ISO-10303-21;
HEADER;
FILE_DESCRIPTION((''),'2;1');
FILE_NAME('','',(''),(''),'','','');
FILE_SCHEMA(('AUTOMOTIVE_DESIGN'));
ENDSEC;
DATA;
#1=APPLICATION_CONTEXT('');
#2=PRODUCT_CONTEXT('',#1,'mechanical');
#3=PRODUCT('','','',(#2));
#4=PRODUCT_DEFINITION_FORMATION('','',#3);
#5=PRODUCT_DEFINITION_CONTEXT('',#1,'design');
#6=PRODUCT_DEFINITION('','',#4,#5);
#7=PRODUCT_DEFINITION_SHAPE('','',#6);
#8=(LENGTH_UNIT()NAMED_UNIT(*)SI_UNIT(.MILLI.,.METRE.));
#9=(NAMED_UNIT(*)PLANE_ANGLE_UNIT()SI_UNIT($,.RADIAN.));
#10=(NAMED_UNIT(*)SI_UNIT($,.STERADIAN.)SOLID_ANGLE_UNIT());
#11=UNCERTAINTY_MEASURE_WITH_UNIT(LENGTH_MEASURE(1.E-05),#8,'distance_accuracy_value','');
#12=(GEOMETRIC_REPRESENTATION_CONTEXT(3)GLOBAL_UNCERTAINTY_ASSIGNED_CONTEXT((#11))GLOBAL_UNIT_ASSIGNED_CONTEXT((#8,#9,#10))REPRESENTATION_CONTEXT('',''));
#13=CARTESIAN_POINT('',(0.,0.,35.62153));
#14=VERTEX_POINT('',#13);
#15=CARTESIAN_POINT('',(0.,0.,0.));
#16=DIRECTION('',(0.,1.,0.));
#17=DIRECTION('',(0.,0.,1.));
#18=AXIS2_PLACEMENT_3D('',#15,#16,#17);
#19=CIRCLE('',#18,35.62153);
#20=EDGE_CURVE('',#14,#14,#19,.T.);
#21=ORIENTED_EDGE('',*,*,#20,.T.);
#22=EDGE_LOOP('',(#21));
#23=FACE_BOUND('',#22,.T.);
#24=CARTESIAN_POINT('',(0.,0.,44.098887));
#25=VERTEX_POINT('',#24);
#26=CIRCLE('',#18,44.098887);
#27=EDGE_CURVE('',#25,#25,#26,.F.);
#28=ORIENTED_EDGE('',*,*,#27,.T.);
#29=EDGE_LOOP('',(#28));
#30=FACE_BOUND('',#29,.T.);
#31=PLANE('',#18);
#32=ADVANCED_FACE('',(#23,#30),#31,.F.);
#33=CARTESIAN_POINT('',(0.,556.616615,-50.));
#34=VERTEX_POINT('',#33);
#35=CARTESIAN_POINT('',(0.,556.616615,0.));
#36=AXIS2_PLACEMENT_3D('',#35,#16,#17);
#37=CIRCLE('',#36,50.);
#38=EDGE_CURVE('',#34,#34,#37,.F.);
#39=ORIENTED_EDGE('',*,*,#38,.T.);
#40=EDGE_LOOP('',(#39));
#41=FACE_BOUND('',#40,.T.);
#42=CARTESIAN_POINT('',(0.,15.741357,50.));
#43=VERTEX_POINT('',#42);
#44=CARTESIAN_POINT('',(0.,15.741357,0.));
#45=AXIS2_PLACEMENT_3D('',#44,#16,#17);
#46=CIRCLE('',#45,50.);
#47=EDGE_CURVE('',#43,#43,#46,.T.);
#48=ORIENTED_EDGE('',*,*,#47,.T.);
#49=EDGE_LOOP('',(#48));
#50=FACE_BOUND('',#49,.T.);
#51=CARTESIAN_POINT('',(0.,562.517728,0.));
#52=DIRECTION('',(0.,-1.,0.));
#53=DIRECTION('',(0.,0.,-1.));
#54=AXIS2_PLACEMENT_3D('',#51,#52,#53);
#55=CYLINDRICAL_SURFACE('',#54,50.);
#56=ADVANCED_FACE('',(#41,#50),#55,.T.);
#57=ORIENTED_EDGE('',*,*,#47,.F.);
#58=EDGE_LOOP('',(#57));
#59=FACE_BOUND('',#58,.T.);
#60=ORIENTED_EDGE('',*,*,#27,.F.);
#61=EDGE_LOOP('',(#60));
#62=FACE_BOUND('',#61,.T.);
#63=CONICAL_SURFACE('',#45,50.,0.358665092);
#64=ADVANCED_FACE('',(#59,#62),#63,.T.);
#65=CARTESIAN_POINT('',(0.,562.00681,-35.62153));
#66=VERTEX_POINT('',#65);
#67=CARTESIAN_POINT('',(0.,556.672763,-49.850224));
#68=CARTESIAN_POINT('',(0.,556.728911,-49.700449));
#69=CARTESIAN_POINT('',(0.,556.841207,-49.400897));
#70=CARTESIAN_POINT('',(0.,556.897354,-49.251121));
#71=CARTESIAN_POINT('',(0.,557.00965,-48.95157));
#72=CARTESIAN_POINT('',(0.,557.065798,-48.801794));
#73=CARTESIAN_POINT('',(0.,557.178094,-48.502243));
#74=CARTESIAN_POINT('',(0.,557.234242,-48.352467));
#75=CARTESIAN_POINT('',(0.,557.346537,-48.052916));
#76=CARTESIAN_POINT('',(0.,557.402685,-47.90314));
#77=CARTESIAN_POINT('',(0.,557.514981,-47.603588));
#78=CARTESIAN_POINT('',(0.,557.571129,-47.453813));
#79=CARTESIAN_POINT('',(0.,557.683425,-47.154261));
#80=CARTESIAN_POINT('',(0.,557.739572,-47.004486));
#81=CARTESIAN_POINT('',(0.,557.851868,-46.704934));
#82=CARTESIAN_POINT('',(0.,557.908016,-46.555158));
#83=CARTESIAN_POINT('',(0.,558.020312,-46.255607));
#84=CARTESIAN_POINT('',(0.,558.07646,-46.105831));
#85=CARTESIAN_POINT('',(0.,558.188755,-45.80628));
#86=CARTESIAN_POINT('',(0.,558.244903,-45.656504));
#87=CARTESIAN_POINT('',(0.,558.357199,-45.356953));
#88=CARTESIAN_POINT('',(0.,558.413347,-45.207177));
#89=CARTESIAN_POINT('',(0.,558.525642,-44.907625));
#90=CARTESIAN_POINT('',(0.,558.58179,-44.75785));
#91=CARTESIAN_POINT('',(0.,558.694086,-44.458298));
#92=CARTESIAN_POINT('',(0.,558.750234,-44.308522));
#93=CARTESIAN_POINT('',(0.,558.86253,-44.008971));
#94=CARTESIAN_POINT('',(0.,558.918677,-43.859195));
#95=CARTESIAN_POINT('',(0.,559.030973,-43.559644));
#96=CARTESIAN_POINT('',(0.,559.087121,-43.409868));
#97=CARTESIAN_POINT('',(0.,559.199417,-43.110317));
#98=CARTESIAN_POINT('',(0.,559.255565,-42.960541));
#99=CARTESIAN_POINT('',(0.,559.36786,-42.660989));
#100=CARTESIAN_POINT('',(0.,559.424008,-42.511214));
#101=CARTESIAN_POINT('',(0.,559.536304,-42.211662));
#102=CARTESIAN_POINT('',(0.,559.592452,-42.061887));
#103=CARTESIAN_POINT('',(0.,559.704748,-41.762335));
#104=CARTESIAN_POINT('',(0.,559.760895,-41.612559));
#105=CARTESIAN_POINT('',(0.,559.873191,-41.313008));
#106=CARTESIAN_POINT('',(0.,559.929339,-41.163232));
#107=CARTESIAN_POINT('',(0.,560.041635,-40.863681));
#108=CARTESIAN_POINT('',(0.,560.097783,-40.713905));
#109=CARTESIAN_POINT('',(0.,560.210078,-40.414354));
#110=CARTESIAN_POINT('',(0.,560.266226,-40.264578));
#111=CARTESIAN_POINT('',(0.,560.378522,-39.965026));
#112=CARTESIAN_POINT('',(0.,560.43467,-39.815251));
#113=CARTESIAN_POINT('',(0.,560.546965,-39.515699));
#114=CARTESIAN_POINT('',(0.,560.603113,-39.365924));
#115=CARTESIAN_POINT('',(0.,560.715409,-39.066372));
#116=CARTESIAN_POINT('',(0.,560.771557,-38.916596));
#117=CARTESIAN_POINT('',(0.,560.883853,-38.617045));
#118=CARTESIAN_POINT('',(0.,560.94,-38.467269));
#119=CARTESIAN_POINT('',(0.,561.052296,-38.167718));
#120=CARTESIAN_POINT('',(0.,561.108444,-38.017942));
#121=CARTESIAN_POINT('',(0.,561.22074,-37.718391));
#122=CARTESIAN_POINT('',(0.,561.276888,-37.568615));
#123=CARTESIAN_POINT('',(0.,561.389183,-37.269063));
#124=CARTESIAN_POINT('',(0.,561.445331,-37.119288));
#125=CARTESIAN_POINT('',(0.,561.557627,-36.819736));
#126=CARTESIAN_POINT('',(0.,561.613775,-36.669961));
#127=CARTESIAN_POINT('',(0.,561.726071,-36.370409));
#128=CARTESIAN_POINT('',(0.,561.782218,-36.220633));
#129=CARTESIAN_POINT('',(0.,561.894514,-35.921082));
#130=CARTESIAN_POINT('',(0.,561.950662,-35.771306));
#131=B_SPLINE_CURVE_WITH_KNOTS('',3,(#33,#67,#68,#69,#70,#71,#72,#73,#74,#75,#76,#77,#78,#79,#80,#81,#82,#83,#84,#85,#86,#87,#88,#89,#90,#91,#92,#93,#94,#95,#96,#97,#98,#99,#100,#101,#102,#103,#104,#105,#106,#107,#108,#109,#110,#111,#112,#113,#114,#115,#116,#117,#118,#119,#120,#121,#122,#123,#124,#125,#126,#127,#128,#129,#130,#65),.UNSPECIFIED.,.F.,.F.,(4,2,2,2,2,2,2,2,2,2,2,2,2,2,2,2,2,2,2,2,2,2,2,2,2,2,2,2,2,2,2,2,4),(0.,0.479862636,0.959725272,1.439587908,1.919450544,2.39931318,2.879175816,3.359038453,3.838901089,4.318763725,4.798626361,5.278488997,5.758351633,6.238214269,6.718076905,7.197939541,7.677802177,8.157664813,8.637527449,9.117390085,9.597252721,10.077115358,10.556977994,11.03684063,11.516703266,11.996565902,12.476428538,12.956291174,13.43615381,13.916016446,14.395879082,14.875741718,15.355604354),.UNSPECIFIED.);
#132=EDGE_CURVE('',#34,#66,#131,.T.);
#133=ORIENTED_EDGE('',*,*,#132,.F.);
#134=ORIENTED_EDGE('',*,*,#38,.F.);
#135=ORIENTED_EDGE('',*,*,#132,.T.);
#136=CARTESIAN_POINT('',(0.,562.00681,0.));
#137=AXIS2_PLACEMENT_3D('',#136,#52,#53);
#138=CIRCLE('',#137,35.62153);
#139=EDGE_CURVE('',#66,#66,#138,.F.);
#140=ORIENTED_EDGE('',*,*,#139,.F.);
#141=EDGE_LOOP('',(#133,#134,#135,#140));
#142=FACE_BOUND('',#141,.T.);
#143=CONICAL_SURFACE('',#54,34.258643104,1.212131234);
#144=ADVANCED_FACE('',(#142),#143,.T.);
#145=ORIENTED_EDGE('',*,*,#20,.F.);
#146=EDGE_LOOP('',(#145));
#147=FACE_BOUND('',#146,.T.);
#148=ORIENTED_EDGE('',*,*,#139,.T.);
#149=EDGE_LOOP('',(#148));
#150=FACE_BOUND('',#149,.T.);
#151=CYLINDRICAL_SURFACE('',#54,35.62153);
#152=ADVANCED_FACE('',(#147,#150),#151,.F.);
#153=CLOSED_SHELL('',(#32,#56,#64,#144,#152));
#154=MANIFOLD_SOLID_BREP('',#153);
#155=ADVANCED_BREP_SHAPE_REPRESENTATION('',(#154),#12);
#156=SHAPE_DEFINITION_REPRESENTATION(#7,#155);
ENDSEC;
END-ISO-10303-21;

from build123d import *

# Parameters (mm, degrees)
SKETCH1_R           = 50
BOSS_EXTRUDE1_DEPTH = 562.517728
SKETCH2_R           = 35.621530439
CUT_EXTRUDE1_DEPTH  = 567.944613092
CHAMFER1_SIZE       = 5.901113
CHAMFER1_SIZE_2     = 15.741357


with BuildPart() as part:
    # Sketch1 → Boss-Extrude1 (new body)
    with BuildSketch(Plane(origin=(0, 0, 0), x_dir=(1, 0, 0), z_dir=(0, 1, 0))):
        with Locations(Location((0, 0, 0), (0, 0, 270))):
            Circle(SKETCH1_R)
    extrude(amount=BOSS_EXTRUDE1_DEPTH)

    # Sketch2 → Cut-Extrude1 (cut, through all)
    with BuildSketch(Plane(origin=(0, 0, 0), x_dir=(1, 0, 0), z_dir=(0, 1, 0))):
        with Locations(Location((0, 0, 0), (0, 0, 270))):
            Circle(SKETCH2_R)
    extrude(amount=CUT_EXTRUDE1_DEPTH, mode=Mode.SUBTRACT)

    # Chamfer1
    # the kernel refuses this chamfer: 15.741357, 5.901113 mm, written as the material it takes off along each edge
    with BuildSketch(Plane(origin=(0, 562.517728, 0), x_dir=(0, 0, 1), z_dir=(-1, 0, 0))) as chamfer1_piece_1:
        Polygon((50, -CHAMFER1_SIZE), (50 - CHAMFER1_SIZE_2, 0), (50, 0), align=None)
    revolve(axis=Axis((0, 562.517728, 0), (0, 1, 0)), mode=Mode.SUBTRACT)
    with BuildSketch(Plane(origin=(0, 0, 0), x_dir=(0, 0, 1), z_dir=(-1, 0, 0))) as chamfer1_piece_2:
        Polygon((50, CHAMFER1_SIZE_2), (50 - CHAMFER1_SIZE, 0), (50, 0), align=None)
    revolve(axis=Axis((0, 0, 0), (0, 1, 0)), mode=Mode.SUBTRACT)


solid = part.part
